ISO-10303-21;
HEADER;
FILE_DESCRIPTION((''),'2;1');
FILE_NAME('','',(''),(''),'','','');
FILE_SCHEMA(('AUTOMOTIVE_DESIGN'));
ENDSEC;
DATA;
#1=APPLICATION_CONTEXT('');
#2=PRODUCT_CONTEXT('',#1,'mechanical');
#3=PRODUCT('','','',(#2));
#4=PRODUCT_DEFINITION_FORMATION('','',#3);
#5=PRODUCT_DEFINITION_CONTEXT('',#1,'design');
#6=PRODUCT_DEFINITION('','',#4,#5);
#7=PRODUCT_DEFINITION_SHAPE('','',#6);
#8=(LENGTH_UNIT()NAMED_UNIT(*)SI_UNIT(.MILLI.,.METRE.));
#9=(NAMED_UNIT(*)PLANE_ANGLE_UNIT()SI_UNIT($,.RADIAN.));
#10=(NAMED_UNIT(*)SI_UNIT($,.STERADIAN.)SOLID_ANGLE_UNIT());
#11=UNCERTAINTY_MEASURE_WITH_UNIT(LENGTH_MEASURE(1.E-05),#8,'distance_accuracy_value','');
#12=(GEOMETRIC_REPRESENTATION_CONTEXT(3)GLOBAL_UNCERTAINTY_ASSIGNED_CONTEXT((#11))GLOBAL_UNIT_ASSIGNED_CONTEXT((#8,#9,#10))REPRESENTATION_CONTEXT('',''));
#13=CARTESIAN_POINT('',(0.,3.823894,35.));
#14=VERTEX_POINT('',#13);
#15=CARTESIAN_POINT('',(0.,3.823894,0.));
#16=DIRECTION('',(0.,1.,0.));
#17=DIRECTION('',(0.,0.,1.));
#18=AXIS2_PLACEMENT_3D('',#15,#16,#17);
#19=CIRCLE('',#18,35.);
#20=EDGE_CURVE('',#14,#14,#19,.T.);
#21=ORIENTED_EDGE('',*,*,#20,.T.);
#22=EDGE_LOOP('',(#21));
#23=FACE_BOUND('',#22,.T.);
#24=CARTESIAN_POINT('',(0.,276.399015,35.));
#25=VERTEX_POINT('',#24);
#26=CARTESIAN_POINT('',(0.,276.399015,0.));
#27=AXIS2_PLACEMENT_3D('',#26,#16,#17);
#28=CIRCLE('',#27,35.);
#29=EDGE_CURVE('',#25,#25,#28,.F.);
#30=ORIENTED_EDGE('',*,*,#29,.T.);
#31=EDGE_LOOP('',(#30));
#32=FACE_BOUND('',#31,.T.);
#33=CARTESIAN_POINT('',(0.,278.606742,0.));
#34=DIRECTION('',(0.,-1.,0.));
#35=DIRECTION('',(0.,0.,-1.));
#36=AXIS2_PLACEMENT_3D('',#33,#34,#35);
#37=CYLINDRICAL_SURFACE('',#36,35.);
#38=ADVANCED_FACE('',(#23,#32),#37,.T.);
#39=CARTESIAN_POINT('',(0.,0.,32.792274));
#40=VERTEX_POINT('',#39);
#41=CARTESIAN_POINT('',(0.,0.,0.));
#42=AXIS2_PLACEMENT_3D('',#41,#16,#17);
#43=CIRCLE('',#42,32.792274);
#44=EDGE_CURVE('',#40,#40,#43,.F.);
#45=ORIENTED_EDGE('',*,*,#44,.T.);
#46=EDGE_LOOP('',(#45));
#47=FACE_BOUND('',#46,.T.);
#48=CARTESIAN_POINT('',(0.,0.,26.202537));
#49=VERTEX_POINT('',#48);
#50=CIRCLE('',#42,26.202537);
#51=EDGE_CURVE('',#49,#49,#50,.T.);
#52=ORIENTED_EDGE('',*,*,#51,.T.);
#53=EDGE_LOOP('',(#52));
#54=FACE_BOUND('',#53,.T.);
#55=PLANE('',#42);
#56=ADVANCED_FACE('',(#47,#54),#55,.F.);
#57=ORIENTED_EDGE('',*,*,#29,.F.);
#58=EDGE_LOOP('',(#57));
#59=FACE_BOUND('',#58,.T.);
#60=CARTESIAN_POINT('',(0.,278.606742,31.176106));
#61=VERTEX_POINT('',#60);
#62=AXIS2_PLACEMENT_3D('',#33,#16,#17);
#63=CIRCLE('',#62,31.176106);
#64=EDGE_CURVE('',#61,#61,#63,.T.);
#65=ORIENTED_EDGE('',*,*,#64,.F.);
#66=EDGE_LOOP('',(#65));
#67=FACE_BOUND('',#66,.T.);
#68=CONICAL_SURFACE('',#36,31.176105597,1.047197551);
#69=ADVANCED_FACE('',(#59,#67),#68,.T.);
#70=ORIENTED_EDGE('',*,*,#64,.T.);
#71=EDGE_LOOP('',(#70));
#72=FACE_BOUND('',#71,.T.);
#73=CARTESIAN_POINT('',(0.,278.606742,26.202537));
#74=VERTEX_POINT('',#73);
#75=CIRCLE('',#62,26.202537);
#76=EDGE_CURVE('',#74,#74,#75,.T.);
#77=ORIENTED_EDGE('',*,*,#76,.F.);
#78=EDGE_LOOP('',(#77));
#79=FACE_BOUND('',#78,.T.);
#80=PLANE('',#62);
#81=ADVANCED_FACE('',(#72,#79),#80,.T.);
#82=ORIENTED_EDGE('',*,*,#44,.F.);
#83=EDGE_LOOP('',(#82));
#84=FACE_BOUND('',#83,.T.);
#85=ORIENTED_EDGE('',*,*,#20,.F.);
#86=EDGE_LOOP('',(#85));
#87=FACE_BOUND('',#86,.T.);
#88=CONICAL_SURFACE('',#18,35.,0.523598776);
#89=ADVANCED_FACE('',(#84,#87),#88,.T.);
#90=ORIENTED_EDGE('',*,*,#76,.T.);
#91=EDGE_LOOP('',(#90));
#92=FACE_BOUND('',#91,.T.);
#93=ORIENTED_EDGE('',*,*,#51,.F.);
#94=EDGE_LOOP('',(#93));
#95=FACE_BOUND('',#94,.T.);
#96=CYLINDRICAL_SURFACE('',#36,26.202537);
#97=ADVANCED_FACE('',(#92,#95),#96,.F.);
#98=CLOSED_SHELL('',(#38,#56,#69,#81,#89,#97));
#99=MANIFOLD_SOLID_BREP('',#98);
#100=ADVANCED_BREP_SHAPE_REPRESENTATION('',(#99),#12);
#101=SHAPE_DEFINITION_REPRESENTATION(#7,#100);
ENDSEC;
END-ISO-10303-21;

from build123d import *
from OCP.BRepFilletAPI import BRepFilletAPI_MakeChamfer

# Parameters (mm, degrees)
SKETCH1_R           = 35
BOSS_EXTRUDE1_DEPTH = 278.606741562
SKETCH2_R           = 26.20253666
CUT_EXTRUDE1_DEPTH  = 283.969462034
CHAMFER1_SIZE       = 2.207726463
CHAMFER1_SIZE2      = 3.823894403


with BuildPart() as part:
    # Sketch1 → Boss-Extrude1 (new body)
    with BuildSketch(Plane(origin=(0, 0, 0), x_dir=(1, 0, 0), z_dir=(0, 1, 0))):
        Circle(SKETCH1_R)
    extrude(amount=BOSS_EXTRUDE1_DEPTH)

    # Sketch2 → Cut-Extrude1 (cut, through all)
    with BuildSketch(Plane(origin=(0, 0, 0), x_dir=(1, 0, 0), z_dir=(0, 1, 0))):
        Circle(SKETCH2_R)
    extrude(amount=CUT_EXTRUDE1_DEPTH, mode=Mode.SUBTRACT)

    # Chamfer1: one chamfer whose edges measure the first distance from different faces: ONE call of the kernel's chamfer builder (chamfer() names one face for all edges)
    chamfer1_edges_1 = [part.edges().sort_by_distance(p)[0] for p in [
        (-35, 278.606741562, 0),
    ]]
    chamfer1_side_1 = [part.faces().sort_by_distance(p)[0] for p in [
        (-35, 139.303370781, 0),
    ]]
    chamfer1_edges_2 = [part.edges().sort_by_distance(p)[0] for p in [
        (-35, 0, 0),
    ]]
    chamfer1_side_2 = [part.faces().sort_by_distance(p)[0] for p in [
        (-34.010050506, 0, 0),
    ]]
    chamfer1 = BRepFilletAPI_MakeChamfer(part.part.solid().wrapped)
    for e in chamfer1_edges_1:
        chamfer1.Add(CHAMFER1_SIZE, CHAMFER1_SIZE2, e.wrapped, chamfer1_side_1[0].wrapped)  # the first distance lies on this face
    for e in chamfer1_edges_2:
        chamfer1.Add(CHAMFER1_SIZE, CHAMFER1_SIZE2, e.wrapped, chamfer1_side_2[0].wrapped)  # the first distance lies on this face
    add(Compound.cast(chamfer1.Shape()), mode=Mode.REPLACE)


solid = part.part
